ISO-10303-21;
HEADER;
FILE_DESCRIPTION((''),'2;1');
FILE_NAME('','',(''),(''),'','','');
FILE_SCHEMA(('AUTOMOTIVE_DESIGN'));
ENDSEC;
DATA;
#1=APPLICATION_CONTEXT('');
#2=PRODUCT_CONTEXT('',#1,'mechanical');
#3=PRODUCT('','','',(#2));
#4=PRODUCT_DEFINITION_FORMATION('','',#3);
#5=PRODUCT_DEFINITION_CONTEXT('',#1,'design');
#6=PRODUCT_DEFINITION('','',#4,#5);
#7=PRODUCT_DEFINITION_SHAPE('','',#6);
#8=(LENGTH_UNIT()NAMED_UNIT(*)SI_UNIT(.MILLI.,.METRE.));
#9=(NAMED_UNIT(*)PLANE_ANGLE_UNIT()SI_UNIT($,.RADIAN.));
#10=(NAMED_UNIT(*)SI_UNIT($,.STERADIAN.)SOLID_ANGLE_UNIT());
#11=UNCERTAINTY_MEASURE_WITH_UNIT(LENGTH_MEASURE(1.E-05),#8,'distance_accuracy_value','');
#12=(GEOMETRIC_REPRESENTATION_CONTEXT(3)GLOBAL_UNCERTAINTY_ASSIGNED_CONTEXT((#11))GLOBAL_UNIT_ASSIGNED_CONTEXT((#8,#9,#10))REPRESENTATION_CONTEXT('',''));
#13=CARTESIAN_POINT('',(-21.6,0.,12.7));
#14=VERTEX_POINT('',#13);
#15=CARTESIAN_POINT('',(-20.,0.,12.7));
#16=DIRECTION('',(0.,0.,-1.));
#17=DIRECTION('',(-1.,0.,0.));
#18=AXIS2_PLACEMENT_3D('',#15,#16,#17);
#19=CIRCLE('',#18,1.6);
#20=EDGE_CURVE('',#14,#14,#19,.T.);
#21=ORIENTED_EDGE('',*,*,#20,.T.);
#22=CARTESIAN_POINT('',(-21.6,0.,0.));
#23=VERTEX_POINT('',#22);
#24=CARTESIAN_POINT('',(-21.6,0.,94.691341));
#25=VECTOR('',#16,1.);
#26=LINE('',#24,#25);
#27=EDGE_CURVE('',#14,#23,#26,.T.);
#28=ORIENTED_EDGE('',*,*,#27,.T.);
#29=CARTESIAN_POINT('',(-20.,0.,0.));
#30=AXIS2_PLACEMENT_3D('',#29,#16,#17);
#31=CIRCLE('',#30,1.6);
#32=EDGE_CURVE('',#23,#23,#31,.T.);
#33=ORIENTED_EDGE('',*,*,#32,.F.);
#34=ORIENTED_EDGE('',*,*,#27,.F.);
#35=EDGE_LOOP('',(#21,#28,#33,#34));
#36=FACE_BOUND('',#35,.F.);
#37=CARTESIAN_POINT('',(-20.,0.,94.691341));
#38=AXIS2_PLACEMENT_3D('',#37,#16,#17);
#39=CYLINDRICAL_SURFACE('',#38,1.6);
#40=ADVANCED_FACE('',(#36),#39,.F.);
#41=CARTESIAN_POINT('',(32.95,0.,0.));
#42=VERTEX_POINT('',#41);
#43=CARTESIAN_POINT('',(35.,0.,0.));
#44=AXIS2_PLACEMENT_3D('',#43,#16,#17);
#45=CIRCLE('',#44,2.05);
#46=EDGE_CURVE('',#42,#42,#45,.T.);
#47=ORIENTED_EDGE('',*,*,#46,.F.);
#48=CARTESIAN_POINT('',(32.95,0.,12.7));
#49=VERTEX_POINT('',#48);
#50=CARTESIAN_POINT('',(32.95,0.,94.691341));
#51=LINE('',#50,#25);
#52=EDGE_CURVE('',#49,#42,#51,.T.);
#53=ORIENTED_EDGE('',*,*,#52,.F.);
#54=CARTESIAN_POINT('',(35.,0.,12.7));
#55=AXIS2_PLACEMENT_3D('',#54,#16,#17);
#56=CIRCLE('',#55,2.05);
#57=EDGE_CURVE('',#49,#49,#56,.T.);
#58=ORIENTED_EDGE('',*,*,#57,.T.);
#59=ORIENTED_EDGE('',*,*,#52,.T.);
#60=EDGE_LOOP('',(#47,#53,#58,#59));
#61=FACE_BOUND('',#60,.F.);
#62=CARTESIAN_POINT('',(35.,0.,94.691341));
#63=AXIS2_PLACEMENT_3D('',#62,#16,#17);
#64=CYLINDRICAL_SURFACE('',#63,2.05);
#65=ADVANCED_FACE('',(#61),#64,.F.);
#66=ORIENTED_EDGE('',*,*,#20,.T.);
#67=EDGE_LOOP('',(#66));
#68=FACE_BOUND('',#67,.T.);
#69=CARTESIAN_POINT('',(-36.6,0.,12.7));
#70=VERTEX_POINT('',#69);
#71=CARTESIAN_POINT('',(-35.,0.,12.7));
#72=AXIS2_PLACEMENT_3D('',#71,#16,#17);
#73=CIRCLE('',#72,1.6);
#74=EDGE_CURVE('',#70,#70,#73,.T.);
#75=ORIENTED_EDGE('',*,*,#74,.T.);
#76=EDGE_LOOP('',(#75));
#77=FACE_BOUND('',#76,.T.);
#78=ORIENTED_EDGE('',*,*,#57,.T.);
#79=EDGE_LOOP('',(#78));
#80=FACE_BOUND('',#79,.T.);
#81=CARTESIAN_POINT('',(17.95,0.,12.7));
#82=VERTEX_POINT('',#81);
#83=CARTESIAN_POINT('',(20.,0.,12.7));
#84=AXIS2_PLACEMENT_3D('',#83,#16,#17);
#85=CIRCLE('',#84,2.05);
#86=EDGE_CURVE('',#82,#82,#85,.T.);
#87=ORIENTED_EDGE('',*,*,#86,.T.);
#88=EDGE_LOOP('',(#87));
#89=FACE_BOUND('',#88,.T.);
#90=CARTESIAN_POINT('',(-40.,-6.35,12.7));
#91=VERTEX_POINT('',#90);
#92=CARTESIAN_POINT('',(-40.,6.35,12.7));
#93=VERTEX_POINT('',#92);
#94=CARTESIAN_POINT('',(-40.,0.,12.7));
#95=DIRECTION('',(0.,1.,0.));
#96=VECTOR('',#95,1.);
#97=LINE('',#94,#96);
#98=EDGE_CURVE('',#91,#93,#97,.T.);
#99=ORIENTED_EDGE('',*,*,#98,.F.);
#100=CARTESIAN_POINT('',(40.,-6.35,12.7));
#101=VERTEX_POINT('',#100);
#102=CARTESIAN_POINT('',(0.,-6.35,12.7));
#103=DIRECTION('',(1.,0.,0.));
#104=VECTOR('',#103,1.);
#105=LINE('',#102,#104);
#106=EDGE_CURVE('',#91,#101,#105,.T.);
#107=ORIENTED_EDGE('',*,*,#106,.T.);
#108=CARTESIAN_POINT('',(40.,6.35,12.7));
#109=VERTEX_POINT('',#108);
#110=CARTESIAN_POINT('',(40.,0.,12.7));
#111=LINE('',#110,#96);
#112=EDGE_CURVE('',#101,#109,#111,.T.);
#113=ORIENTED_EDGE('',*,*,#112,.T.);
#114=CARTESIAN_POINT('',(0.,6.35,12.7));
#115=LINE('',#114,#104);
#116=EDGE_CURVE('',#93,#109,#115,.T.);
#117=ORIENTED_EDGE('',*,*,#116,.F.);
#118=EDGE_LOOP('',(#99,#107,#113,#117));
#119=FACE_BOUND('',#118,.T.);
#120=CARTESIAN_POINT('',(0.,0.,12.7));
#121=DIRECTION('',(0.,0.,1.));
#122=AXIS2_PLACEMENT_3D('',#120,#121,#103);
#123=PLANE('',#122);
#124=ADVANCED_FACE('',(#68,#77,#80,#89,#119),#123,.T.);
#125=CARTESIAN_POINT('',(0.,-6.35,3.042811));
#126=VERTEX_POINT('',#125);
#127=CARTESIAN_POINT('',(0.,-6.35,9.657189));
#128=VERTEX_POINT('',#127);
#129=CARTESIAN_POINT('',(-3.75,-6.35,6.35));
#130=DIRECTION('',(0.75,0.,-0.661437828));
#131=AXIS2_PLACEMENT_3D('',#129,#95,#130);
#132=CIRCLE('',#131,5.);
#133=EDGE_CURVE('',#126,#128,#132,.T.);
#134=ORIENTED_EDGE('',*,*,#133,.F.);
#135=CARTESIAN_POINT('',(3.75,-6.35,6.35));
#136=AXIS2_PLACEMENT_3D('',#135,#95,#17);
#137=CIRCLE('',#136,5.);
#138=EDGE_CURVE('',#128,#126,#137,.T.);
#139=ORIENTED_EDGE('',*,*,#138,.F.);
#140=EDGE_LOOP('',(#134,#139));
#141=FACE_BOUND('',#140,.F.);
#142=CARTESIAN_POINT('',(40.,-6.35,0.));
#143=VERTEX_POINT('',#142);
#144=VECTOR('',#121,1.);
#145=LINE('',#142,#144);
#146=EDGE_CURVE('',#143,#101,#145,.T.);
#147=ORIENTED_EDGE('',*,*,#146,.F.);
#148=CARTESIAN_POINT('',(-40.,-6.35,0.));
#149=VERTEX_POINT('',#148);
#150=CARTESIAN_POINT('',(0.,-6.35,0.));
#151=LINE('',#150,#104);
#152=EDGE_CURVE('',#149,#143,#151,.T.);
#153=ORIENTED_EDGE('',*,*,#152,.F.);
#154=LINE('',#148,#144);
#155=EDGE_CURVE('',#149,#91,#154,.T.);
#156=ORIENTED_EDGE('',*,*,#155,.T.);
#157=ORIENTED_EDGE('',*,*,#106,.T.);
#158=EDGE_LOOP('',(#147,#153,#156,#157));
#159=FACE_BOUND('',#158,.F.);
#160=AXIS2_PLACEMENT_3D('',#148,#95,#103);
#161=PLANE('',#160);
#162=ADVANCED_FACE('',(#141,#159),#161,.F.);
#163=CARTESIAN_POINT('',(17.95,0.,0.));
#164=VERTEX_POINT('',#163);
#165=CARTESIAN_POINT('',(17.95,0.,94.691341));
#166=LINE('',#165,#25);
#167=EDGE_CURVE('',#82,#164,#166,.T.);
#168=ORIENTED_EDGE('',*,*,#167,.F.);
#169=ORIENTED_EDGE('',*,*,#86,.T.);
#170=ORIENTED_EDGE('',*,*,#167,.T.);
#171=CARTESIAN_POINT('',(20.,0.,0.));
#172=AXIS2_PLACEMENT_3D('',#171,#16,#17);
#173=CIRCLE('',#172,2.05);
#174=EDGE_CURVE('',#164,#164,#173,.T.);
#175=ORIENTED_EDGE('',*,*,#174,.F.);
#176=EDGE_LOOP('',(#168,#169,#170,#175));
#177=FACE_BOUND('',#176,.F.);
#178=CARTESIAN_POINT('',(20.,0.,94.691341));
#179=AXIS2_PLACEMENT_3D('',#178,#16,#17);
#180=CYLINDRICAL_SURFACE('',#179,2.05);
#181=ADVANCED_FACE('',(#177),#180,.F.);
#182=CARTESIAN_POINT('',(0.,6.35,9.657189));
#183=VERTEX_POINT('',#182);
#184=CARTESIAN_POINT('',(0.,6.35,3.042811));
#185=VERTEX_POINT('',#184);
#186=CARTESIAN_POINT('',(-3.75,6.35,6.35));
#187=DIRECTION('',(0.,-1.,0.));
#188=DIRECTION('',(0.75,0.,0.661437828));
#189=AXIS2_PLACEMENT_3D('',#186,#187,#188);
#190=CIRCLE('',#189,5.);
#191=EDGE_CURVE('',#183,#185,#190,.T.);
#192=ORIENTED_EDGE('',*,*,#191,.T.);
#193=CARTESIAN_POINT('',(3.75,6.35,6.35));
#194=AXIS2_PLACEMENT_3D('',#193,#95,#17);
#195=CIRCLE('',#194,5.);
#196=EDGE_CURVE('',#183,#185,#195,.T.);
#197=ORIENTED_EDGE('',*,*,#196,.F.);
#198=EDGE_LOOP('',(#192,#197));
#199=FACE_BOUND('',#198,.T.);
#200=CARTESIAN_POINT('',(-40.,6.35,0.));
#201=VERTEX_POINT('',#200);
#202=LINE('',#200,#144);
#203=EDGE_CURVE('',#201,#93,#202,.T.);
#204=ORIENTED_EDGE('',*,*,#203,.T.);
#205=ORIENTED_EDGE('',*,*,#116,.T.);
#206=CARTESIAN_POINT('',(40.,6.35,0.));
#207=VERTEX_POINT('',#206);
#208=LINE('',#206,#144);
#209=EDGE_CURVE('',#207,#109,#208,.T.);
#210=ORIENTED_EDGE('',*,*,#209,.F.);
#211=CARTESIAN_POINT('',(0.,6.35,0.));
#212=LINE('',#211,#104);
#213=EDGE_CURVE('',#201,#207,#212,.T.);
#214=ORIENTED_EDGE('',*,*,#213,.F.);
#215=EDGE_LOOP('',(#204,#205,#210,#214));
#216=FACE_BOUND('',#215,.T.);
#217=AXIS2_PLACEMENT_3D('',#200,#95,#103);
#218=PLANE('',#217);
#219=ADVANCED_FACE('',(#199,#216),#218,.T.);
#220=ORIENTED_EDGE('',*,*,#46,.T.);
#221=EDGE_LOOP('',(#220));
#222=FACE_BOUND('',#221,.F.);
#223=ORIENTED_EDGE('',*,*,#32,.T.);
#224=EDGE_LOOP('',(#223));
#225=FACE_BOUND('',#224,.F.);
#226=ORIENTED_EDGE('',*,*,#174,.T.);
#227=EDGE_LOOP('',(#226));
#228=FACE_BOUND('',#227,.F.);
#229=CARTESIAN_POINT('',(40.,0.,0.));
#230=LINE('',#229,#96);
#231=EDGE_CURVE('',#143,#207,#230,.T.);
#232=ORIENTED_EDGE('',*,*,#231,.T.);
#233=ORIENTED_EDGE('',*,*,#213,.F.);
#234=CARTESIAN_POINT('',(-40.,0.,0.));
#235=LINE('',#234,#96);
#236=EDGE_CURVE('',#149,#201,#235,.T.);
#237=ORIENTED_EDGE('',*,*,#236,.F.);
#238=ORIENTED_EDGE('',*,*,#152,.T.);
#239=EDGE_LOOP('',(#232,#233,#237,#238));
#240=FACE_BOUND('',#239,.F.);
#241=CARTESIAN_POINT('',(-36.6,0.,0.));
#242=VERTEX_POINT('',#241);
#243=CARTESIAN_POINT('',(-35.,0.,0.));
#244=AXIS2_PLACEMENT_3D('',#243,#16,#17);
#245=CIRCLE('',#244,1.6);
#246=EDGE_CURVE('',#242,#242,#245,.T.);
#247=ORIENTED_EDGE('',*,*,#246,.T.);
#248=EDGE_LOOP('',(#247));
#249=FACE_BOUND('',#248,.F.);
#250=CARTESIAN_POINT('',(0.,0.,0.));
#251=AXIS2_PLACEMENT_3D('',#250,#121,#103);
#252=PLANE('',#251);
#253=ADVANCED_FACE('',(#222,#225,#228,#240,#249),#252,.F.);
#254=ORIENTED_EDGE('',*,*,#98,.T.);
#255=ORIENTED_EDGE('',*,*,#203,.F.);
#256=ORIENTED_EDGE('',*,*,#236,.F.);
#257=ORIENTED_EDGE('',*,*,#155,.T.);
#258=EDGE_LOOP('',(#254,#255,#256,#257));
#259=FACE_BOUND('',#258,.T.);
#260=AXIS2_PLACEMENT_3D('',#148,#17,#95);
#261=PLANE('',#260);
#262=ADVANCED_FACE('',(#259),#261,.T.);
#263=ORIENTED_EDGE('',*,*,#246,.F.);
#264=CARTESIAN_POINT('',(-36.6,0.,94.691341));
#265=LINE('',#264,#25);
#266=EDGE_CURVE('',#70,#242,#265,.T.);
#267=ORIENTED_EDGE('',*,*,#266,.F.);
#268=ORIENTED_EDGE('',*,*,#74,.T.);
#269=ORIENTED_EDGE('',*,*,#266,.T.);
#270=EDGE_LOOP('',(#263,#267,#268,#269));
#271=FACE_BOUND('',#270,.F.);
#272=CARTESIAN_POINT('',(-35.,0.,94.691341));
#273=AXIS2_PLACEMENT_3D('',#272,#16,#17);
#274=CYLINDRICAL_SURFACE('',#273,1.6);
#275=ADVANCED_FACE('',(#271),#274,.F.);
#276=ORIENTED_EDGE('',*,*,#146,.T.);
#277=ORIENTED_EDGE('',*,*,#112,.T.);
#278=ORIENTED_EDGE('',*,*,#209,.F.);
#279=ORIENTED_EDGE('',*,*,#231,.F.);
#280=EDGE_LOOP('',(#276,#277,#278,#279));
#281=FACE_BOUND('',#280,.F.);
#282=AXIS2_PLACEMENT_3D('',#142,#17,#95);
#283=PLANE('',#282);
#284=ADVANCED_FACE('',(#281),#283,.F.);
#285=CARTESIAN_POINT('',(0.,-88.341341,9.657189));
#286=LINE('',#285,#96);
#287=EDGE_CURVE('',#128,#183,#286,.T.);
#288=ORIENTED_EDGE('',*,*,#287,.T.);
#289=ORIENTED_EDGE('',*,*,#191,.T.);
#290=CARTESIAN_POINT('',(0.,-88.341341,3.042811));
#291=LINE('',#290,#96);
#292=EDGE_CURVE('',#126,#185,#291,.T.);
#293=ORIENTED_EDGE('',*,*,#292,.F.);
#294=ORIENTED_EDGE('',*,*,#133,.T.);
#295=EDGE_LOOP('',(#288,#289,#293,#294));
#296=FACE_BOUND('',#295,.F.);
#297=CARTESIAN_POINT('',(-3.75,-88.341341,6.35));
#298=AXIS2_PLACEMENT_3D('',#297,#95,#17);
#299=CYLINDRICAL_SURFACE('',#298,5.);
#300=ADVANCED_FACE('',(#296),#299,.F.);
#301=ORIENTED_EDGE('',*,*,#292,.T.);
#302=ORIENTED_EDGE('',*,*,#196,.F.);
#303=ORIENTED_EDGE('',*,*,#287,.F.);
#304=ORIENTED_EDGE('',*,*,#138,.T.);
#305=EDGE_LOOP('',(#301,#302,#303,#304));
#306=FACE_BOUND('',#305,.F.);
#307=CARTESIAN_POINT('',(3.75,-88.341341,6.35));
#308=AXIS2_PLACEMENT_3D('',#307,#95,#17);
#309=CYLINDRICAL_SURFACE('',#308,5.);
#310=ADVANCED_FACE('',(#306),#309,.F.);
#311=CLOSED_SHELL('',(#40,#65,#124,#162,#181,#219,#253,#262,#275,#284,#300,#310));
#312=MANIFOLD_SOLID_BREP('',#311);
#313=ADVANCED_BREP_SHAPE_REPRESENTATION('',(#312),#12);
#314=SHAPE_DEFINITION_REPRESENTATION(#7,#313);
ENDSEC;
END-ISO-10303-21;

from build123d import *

# Parameters (mm, degrees)
F0_W     = 80
F0_H     = 12.7
F1_DEPTH = 12.7
F3_D     = 3.2
F5_D     = 4.1
F7_D     = 10


with BuildPart() as f1:
    # F0 (on Top) → F1 (new body)
    with BuildSketch(Plane.XY):
        Rectangle(F0_W, F0_H)
    extrude(amount=F1_DEPTH)

    # F3 (through all)
    with Locations(Plane.XY.offset(12.7)):
        with Locations((-35, 0), (-20, 0)):
            Hole(F3_D / 2)

    # F5 (through all)
    with Locations(Plane.XY.offset(12.7)):
        with Locations((20, 0), (35, 0)):
            Hole(F5_D / 2)

    # F7 (through all)
    with Locations(Plane.XZ.offset(6.35)):
        with Locations((-3.75, 6.35), (3.75, 6.35)):
            Hole(F7_D / 2)


solid = f1.part
